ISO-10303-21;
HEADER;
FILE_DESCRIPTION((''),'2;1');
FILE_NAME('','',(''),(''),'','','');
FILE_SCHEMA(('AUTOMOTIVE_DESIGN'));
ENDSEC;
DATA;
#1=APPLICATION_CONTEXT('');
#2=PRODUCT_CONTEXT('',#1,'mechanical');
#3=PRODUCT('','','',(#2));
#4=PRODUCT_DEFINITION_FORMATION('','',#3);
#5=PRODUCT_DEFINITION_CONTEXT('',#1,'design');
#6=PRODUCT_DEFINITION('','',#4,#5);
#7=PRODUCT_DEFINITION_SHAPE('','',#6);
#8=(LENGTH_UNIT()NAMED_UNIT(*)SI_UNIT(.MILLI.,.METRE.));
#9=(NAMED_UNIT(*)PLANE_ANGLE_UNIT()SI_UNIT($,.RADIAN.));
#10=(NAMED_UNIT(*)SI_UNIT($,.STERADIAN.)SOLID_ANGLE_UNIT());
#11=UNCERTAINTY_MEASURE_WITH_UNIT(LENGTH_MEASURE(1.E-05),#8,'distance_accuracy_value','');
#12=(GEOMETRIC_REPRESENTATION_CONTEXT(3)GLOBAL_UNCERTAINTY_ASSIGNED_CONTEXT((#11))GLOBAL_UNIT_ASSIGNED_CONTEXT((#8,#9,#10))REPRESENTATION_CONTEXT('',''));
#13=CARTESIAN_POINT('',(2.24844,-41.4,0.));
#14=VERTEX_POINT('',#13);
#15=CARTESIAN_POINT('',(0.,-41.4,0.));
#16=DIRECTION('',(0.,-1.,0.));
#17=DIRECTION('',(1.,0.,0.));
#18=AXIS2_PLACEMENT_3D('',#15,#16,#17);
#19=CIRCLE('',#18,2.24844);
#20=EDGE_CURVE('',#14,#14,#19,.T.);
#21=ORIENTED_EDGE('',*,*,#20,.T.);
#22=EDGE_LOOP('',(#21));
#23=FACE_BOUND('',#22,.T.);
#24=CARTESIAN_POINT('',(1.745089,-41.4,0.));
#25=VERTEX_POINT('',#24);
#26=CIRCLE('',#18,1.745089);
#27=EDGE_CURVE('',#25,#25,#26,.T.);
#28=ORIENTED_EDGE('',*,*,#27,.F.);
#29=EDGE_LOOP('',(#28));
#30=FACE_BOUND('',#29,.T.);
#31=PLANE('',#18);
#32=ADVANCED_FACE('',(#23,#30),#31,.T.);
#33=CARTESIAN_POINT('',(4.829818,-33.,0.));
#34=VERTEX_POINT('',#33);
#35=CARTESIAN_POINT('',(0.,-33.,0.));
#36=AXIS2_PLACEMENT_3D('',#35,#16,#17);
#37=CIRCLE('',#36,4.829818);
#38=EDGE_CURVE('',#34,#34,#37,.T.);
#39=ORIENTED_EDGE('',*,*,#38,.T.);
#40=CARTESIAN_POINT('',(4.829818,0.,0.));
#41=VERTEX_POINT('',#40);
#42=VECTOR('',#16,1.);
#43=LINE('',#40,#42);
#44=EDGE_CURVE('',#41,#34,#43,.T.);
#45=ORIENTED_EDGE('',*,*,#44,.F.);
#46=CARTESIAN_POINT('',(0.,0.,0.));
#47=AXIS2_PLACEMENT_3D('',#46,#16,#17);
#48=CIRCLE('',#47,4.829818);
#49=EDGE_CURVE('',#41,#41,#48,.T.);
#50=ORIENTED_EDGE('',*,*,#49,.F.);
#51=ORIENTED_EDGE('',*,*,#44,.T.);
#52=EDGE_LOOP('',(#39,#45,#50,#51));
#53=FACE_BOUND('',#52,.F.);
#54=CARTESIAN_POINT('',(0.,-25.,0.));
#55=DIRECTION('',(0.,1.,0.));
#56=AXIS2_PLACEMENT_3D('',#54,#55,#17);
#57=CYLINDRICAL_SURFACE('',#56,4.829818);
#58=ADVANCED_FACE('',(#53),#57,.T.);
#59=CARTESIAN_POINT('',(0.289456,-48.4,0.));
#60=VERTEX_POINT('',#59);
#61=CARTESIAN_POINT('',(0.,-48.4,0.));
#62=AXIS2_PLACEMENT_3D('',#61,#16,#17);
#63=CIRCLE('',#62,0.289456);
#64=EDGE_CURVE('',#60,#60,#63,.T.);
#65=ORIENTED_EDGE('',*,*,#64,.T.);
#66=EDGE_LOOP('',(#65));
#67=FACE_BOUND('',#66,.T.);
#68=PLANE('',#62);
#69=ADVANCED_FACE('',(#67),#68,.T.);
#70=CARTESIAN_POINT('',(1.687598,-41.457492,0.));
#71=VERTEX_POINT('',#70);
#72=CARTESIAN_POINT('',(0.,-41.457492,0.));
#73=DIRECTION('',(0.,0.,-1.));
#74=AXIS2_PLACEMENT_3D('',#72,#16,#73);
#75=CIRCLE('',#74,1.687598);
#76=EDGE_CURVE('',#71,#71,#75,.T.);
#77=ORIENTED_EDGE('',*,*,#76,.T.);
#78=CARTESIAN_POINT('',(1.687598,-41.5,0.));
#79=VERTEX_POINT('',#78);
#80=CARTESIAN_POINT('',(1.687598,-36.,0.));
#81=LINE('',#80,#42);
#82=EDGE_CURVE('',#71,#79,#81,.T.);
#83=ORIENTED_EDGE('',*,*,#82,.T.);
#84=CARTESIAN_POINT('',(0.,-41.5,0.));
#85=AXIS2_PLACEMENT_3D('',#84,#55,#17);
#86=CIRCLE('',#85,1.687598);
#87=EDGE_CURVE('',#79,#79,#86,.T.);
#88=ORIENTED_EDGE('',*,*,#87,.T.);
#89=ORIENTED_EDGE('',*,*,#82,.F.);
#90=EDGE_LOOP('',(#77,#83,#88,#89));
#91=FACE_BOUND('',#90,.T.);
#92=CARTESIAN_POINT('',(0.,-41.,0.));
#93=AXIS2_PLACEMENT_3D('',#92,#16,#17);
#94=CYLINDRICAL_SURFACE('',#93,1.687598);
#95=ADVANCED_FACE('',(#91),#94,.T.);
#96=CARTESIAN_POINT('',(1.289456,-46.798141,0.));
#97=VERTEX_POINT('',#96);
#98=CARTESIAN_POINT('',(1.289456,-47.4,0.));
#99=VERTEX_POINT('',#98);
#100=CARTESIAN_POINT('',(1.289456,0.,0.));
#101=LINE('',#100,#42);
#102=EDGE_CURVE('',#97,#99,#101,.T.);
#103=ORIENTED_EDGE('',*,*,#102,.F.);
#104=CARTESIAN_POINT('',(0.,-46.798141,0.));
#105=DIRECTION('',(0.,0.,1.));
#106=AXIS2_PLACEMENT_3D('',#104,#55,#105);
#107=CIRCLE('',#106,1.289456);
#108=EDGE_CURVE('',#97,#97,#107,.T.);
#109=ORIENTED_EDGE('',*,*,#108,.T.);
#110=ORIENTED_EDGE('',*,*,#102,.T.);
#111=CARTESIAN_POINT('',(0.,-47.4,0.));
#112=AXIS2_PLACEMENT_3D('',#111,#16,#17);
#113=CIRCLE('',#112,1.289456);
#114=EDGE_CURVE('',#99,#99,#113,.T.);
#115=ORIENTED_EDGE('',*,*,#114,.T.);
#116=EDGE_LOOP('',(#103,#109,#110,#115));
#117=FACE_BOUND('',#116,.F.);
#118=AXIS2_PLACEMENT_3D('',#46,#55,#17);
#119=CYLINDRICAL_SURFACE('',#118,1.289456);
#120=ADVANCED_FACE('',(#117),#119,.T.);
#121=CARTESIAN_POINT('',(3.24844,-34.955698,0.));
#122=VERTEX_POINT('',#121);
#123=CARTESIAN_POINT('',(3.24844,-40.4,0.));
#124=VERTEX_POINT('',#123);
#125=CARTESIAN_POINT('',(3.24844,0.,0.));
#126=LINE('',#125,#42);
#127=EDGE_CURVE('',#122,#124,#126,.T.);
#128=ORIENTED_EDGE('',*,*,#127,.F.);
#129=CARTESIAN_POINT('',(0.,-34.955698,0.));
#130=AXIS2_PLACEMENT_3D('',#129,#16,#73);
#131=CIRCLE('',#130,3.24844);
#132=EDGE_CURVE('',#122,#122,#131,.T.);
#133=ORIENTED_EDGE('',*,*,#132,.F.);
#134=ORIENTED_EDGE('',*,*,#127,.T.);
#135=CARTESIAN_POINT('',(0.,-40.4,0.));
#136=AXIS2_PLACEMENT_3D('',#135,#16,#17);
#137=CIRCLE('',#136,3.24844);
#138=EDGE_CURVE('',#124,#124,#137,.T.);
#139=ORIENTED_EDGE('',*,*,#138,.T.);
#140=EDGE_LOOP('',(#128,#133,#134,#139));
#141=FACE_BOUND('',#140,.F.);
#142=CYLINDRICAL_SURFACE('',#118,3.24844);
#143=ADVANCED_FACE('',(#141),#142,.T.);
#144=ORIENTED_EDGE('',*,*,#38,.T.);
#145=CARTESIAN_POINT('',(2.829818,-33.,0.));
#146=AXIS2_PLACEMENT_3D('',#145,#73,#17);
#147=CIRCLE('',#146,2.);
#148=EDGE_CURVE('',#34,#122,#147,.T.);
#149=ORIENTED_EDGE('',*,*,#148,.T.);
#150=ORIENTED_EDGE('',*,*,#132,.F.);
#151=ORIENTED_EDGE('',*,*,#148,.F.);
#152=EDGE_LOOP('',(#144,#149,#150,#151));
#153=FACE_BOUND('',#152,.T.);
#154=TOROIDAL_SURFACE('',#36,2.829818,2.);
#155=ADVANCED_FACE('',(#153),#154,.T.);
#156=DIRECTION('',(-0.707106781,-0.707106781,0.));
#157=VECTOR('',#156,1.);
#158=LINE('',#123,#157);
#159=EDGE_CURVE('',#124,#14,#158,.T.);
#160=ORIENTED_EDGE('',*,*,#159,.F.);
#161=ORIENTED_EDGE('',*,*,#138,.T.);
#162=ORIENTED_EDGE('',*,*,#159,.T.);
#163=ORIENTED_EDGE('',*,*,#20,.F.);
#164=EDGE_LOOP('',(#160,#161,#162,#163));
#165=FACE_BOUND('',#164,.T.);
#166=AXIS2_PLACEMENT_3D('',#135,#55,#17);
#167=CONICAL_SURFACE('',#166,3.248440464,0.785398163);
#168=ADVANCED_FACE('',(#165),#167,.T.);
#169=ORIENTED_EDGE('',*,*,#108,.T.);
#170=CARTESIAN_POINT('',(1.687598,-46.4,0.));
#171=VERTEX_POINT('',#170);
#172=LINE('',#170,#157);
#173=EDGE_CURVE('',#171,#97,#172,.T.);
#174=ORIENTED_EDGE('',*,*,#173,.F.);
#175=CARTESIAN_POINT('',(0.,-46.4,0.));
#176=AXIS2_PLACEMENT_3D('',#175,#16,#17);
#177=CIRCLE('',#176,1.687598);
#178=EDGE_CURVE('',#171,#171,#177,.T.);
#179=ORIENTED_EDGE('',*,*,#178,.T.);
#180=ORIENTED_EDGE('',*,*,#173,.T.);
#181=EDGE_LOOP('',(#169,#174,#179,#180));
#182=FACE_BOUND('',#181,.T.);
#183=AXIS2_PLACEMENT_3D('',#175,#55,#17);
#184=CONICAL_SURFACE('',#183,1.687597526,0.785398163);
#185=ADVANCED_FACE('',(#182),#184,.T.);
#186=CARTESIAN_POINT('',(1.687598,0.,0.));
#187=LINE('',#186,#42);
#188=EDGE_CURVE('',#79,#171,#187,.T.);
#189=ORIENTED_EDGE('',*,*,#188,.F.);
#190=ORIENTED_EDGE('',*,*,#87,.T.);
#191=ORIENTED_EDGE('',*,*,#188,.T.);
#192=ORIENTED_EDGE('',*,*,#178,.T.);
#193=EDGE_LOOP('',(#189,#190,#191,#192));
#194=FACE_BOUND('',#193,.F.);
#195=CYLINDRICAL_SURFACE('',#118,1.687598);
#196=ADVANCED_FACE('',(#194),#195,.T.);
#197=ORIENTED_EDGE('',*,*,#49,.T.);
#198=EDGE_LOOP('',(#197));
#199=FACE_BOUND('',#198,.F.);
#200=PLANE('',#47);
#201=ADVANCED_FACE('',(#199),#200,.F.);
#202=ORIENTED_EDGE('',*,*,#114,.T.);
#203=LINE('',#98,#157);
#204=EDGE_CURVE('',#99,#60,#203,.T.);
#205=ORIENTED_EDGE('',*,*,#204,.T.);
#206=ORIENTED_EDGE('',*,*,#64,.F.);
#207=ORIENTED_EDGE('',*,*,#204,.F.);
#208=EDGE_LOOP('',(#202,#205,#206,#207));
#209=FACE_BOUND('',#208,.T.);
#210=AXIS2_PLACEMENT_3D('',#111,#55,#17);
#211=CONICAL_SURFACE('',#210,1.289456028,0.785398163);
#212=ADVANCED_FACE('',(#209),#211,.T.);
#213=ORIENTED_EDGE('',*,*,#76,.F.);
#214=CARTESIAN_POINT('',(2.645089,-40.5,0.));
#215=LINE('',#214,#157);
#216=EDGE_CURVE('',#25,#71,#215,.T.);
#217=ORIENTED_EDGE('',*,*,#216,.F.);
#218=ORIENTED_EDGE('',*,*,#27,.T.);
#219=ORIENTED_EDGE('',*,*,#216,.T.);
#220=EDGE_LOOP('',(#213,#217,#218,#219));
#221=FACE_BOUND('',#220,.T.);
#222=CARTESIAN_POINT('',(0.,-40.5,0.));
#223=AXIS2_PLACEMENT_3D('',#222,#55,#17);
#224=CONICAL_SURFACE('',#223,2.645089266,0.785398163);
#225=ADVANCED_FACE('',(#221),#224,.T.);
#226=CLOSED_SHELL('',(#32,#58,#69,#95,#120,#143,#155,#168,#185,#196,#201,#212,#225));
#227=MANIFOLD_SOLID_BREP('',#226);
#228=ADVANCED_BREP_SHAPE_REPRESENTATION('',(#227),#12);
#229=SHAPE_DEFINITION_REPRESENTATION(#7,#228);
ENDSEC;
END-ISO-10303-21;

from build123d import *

# Parameters (mm, degrees)
F0_R         = 4.8298181264
F1_DEPTH     = 25
F2_DEPTH     = 10
F3_R         = 2
F4_R         = 1.5870534729
F5_DEPTH     = 0.5
F6_R         = 2.6450892659
F7_DEPTH     = 41.5
F8_R         = 1.6875975258
F9_DEPTH     = 47.4
F10_S7_R     = 1.6875975258
F10_T8_DEPTH = 5
F11_R        = 3.2484404645
F12_DEPTH    = 41.4
F13_SIZE     = 1
F14_R        = 1.2894560282
F15_DEPTH    = 48.4
F16_SIZE     = 1


# Not quite as in the source:
# - a fillet or chamfer that OpenCascade refuses, or shapes differently, is made with other operations: its cross-section is extruded or revolved along the edge and cut away or added


with BuildPart() as f1:
    # F0 (on Front) → F1 (new body)
    with BuildSketch(Plane.XZ):
        Circle(F0_R)
    extrude(amount=F1_DEPTH)

    # F2 (add): a face of the model
    f2_faces = [f1.faces().sort_by_distance(p)[0] for p in [
        (0, -25, 0),
    ]]
    extrude(f2_faces, amount=F2_DEPTH)

    # F3
    f3_edges = [f1.edges().sort_by_distance(p)[0] for p in [
        (-4.829818, -35, 0),
    ]]
    fillet(f3_edges, radius=F3_R)

    # F4 (on Front) → F5 (cut)
    with BuildSketch(Plane.XZ):
        Circle(F4_R)
    extrude(amount=F5_DEPTH, mode=Mode.SUBTRACT)

    # F6 (on Front) → F7 (join)
    with BuildSketch(Plane.XZ):
        Circle(F6_R)
    extrude(amount=F7_DEPTH)

    # F8 (on Front) → F9 (join)
    with BuildSketch(Plane.XZ):
        Circle(F8_R)
    extrude(amount=F9_DEPTH)

    # F10: chamfer of 1 on 2 edges, made by hand

    # F10_s1 → F10_t2 (revolve, cut)
    with BuildSketch(Plane.XY):
        Polygon((1.6875975258, -46.4), (0.6875975258, -47.4), (1.6875975258, -47.4), align=None)
    revolve(axis=Axis((0, -47.4, 0), (0, -1, 0)), mode=Mode.SUBTRACT)


with BuildPart() as f10_tool4:
    # F10_s5 → F10_t6 (revolve)
    with BuildSketch(Plane.XY):
        Polygon((2.6450892659, -40.5), (1.6450892659, -41.5), (2.6450892659, -41.5), align=None)
    revolve(axis=Axis((0, -41.5, 0), (0, -1, 0)))

    # F10_s7 → F10_t8 (cut, symmetric)
    with BuildSketch(Plane.XZ.offset(41)):
        Circle(F10_S7_R)
    extrude(amount=F10_T8_DEPTH, both=True, mode=Mode.SUBTRACT)


with BuildPart() as f1_1:
    add(f1.part)

    # F10_t3: cut F10_tool4
    add(f10_tool4.part, mode=Mode.SUBTRACT)

    # F11 (on Front) → F12 (join)
    with BuildSketch(Plane.XZ):
        Circle(F11_R)
    extrude(amount=F12_DEPTH)

    # F13
    f13_edges = [f1_1.edges().sort_by_distance(p)[0] for p in [
        (-3.24844, -41.4, 0),
    ]]
    chamfer(f13_edges, length=F13_SIZE)

    # F14 (on Front) → F15 (join)
    with BuildSketch(Plane.XZ):
        Circle(F14_R)
    extrude(amount=F15_DEPTH)

    # F16
    f16_edges = [f1_1.edges().sort_by_distance(p)[0] for p in [
        (-1.289456, -48.4, 0),
    ]]
    chamfer(f16_edges, length=F16_SIZE)


solid = f1_1.part
